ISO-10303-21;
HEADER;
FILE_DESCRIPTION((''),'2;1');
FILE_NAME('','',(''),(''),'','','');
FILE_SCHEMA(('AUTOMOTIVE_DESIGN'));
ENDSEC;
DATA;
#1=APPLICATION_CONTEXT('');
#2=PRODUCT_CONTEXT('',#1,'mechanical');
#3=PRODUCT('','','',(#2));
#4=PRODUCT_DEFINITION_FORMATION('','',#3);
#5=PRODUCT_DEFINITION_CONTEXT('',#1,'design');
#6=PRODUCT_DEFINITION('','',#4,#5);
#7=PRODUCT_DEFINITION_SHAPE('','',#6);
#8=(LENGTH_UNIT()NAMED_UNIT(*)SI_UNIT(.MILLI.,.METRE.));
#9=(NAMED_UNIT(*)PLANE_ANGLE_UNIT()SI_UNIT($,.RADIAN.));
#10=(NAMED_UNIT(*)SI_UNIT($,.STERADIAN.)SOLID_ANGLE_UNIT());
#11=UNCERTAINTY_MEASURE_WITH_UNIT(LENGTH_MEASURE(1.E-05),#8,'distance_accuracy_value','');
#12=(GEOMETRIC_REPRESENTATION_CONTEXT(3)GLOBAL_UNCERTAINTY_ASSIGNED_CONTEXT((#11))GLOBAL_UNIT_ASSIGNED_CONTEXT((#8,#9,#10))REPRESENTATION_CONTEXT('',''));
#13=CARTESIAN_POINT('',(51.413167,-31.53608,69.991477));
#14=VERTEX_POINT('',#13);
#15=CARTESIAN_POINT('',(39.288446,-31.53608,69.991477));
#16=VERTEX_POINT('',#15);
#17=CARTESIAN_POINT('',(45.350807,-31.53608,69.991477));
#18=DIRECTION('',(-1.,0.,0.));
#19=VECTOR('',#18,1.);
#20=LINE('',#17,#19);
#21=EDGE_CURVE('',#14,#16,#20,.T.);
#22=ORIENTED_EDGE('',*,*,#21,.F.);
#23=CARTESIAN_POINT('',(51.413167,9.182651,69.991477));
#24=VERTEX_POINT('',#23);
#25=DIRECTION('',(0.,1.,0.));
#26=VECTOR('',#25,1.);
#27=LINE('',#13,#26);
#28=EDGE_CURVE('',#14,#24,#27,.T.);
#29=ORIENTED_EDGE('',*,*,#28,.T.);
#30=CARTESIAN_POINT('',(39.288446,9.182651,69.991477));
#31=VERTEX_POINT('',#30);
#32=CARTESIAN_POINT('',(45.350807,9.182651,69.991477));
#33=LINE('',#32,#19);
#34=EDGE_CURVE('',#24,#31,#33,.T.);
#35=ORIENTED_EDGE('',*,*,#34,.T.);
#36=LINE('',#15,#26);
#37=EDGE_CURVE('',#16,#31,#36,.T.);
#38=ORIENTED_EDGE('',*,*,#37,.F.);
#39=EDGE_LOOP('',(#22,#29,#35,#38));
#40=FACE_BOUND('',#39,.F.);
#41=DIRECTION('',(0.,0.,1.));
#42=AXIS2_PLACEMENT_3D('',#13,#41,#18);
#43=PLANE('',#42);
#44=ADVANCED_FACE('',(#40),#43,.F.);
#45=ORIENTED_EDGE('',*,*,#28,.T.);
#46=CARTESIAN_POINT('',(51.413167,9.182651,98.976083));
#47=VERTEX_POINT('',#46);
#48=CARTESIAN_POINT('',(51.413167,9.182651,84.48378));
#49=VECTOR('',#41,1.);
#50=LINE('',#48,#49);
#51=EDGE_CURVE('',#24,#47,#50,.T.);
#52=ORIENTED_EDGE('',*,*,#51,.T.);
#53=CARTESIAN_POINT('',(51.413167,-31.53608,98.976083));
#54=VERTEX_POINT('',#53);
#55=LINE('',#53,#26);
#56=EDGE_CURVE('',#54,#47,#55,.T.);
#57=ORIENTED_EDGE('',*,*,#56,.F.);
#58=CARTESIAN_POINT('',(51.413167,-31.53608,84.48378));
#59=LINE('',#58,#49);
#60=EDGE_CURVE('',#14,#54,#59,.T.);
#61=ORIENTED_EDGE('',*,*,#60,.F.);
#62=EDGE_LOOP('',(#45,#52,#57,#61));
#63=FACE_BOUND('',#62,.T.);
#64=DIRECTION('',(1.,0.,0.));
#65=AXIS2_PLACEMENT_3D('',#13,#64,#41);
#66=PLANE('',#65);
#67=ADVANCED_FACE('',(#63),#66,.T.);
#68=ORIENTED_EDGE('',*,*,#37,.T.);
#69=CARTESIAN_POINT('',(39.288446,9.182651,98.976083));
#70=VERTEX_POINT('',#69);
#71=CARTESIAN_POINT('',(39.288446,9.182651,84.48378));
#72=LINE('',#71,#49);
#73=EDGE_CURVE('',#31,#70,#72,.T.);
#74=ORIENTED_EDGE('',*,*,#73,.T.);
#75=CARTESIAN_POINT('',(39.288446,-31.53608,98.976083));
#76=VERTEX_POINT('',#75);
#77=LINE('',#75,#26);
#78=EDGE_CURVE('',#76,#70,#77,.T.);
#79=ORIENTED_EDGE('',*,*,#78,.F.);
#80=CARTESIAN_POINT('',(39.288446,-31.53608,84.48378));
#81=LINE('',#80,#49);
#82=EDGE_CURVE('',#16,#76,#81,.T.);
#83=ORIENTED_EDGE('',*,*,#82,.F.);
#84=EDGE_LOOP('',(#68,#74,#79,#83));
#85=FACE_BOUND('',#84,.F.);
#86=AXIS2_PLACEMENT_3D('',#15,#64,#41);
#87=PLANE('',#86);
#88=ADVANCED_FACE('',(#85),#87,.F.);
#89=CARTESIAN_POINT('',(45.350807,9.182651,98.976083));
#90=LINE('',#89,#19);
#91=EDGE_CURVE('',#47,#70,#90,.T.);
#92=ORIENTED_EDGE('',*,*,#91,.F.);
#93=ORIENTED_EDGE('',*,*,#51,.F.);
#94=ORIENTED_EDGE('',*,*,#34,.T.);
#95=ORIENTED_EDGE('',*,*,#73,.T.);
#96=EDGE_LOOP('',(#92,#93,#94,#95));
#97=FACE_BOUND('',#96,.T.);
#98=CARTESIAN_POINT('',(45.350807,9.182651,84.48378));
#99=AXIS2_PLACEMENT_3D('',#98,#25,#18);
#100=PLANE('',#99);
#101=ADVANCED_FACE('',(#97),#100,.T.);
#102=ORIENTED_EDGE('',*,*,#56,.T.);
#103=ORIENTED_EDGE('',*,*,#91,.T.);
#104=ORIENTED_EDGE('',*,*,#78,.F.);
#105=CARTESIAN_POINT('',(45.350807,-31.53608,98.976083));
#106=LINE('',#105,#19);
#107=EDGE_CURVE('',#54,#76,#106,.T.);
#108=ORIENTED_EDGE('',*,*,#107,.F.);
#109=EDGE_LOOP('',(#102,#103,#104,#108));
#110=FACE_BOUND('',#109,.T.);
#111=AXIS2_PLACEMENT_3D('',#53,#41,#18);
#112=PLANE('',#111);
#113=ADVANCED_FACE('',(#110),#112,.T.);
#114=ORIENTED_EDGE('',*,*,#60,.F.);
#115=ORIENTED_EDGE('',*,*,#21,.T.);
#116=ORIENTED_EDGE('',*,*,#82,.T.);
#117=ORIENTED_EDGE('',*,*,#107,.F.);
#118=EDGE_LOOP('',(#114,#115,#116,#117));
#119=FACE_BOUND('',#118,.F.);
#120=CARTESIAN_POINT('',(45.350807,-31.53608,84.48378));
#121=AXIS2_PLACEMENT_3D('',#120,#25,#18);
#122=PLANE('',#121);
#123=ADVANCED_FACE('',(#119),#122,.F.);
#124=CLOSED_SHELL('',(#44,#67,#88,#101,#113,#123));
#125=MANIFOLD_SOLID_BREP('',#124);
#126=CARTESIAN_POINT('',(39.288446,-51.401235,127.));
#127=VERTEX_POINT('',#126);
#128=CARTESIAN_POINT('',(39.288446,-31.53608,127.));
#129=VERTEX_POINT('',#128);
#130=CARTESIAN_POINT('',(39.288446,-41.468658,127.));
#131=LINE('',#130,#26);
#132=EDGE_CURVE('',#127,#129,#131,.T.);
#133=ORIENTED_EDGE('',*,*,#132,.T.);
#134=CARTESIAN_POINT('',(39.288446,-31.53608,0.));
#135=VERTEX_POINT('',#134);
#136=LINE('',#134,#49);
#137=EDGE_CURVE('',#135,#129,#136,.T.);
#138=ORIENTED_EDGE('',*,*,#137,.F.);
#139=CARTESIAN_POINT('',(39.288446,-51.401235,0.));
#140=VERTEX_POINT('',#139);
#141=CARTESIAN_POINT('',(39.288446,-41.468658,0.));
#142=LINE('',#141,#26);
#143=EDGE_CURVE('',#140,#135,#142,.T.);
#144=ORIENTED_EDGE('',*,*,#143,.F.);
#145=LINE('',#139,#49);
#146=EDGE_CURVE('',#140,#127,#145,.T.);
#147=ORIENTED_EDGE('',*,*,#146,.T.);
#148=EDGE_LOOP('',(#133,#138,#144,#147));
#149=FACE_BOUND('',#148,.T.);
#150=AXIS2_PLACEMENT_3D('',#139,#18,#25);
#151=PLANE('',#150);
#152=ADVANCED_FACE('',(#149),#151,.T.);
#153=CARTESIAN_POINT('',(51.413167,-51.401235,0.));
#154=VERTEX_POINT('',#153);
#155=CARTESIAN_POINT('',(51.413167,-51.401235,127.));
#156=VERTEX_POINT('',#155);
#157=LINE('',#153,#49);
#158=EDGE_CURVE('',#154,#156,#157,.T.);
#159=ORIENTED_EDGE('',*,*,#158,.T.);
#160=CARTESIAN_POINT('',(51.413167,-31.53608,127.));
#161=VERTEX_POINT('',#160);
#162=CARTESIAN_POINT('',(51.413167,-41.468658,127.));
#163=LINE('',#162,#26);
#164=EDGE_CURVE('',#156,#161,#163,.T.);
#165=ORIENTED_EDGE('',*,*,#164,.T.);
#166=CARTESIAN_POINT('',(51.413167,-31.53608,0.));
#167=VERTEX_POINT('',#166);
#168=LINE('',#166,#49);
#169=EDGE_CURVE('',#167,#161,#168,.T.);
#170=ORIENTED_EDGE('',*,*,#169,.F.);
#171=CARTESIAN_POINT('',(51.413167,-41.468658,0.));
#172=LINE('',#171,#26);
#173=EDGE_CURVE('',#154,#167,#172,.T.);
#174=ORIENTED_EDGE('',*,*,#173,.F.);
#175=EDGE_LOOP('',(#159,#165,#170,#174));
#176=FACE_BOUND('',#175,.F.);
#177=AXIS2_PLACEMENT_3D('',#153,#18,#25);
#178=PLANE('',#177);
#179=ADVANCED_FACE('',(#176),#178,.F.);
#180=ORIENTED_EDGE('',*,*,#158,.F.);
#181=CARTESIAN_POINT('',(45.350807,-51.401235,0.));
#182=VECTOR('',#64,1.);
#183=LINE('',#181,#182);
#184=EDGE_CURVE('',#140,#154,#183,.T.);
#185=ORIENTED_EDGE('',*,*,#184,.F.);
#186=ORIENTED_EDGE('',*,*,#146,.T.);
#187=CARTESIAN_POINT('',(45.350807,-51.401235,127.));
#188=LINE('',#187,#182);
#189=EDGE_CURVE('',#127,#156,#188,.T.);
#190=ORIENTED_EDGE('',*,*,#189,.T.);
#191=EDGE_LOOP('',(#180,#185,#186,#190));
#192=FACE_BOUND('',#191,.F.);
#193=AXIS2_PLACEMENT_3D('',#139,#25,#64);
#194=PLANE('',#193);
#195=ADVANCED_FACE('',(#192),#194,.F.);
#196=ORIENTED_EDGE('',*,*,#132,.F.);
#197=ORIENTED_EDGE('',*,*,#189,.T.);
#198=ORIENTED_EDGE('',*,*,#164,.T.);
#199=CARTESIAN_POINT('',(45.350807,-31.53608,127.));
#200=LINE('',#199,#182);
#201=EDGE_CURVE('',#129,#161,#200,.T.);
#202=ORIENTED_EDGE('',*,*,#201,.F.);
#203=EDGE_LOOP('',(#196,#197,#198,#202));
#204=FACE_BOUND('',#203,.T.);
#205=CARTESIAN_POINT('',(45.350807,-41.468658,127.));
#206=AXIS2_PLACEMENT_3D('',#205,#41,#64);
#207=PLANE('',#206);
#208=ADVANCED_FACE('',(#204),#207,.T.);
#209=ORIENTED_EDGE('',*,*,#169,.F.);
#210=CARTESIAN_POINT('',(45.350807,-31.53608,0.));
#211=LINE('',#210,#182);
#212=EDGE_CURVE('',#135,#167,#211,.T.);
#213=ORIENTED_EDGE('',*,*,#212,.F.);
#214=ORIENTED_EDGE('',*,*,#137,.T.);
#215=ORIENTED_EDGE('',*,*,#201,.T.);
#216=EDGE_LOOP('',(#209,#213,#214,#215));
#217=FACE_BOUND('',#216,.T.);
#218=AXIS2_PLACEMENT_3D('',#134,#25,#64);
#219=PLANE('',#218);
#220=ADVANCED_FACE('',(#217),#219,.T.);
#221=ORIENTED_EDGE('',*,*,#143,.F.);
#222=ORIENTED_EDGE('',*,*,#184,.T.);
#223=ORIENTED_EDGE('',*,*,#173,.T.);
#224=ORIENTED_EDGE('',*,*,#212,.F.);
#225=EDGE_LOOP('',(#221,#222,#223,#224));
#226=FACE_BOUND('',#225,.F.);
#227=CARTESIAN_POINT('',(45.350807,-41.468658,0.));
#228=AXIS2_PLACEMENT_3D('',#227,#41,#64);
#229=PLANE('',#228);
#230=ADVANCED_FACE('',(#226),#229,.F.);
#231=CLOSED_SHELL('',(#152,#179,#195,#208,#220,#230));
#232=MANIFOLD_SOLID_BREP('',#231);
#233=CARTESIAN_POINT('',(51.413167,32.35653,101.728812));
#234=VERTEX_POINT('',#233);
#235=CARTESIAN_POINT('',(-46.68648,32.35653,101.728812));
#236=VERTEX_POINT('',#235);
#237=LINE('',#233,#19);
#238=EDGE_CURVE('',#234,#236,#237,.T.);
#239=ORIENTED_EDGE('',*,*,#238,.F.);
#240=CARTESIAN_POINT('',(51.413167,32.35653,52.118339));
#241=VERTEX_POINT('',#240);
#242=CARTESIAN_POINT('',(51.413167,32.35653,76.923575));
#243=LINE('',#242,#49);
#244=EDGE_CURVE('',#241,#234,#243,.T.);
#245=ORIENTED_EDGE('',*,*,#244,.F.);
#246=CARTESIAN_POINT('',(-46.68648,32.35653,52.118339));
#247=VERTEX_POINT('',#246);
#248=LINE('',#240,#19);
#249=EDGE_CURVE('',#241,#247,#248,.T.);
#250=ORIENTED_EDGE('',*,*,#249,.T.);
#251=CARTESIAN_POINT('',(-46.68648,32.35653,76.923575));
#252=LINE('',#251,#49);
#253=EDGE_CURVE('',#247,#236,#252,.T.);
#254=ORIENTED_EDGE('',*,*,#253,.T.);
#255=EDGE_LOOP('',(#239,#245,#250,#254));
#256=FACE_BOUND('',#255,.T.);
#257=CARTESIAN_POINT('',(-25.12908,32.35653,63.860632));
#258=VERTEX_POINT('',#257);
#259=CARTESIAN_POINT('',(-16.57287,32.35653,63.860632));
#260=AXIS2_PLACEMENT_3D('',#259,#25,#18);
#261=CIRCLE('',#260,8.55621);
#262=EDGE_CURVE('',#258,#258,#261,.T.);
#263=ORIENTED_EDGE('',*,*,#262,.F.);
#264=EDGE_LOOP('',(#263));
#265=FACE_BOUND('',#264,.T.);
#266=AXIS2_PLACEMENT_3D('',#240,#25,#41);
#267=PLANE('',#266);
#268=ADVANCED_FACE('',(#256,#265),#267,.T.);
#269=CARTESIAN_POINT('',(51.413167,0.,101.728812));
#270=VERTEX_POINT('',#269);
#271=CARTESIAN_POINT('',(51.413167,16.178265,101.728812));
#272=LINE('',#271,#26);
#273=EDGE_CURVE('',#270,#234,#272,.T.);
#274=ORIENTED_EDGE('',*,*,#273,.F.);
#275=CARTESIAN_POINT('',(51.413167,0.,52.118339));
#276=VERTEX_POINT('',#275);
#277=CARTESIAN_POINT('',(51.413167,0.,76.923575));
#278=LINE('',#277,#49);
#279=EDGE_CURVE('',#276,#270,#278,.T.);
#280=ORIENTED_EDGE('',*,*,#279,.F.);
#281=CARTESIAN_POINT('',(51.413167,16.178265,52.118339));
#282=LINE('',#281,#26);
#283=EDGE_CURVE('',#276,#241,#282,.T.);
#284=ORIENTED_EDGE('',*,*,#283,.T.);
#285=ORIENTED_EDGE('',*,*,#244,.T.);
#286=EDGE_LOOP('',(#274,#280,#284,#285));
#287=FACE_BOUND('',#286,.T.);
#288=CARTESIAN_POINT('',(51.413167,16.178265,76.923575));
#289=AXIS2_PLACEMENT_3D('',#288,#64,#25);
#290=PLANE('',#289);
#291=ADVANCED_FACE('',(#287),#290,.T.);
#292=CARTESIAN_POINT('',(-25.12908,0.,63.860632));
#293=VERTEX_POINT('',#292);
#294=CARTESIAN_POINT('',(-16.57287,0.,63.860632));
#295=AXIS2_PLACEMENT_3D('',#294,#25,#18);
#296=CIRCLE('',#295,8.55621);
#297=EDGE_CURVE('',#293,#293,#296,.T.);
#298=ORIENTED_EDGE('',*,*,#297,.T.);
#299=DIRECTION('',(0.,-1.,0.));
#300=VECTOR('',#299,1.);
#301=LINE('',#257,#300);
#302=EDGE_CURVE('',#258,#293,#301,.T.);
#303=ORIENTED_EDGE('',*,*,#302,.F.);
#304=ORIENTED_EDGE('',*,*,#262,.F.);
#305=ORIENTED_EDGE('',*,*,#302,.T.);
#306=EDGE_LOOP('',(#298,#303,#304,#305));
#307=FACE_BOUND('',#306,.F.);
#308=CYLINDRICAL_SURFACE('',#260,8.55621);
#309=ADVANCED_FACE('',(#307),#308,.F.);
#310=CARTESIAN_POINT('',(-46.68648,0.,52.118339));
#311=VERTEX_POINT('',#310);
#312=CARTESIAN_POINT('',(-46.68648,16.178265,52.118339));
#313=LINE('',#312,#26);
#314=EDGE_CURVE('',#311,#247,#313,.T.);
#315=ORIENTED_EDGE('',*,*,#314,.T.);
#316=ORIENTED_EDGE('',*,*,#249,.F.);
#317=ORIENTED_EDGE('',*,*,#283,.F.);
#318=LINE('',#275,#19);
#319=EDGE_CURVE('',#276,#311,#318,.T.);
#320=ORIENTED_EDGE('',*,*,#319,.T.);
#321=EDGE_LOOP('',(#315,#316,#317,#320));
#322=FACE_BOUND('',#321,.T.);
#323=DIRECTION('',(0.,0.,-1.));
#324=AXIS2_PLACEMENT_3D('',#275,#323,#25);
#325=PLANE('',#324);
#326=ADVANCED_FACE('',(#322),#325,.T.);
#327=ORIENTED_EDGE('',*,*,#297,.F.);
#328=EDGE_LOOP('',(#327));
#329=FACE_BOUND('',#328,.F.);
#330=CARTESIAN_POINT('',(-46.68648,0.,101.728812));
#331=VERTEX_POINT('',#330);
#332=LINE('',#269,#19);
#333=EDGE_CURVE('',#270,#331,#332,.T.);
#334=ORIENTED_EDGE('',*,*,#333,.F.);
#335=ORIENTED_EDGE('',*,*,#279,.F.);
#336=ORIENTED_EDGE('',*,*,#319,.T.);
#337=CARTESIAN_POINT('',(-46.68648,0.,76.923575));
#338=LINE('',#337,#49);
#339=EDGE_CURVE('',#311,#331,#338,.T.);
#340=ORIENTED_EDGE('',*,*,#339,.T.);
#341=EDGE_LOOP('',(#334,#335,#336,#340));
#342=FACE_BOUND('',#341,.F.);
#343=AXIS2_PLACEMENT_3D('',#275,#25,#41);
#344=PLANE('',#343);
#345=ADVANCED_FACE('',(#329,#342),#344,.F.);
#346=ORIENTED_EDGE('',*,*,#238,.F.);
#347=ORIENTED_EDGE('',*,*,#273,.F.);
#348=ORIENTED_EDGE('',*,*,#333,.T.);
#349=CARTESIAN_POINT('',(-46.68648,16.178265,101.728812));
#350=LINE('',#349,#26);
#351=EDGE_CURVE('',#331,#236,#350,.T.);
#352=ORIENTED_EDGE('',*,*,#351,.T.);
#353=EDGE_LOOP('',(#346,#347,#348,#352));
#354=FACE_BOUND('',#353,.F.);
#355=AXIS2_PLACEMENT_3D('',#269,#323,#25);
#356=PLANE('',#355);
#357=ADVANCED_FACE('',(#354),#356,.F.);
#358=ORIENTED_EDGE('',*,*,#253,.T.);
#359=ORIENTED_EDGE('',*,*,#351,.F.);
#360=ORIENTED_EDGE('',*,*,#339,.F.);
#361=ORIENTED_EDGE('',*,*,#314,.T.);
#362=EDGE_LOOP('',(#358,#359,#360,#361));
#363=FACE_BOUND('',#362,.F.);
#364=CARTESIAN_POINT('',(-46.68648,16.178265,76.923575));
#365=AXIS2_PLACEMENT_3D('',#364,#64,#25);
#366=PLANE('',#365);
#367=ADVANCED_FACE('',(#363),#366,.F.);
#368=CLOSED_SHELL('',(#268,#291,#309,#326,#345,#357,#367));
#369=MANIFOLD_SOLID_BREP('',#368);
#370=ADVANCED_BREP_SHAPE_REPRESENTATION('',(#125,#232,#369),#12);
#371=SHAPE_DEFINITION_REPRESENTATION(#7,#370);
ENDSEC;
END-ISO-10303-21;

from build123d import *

# Parameters (mm, degrees)
F0_W     = 12.1247209609
F0_H     = 19.86515522
F2_DEPTH = 127
F3_W     = 32.3565304279
F3_H     = 49.6104732156
F4_DEPTH = 98.0996470898
F6_W     = 12.1247209609
F6_H     = 28.984606266
F7_DEPTH = 40.7187305391
F8_R     = 8.5562099795
F9_DEPTH = 81.7973520607


# Not quite as in the source:
# - a feature of the source that left no trace in its solid (it failed there, or was rolled back) is left out


with BuildPart() as f2:
    # F0 (on Top) → F2 (new body)
    with BuildSketch(Plane.XY):
        with Locations((45.3508067876, -41.4686575532)):
            Rectangle(F0_W, F0_H)
    extrude(amount=F2_DEPTH)


with BuildPart() as f4:
    # F3 (on face) → F4 (new body)
    with BuildSketch(Plane.YZ.offset(51.413167268)):
        with Locations((16.178265214, 76.9235752523)):
            Rectangle(F3_W, F3_H)
    extrude(amount=-F4_DEPTH)

    # F8 (on face) → F9 (cut)
    with BuildSketch(Plane(origin=(0, 32.3565304279, 0), x_dir=(-1, 0, 0), z_dir=(0, 1, 0))):
        with Locations((16.5728703141, 63.8606324792)):
            Circle(F8_R)
    extrude(amount=-F9_DEPTH, mode=Mode.SUBTRACT)


with BuildPart() as f7:
    # F6 (on face) → F7 (new body)
    with BuildSketch(Plane(origin=(0, -31.5360799432, 0), x_dir=(-1, 0, 0), z_dir=(0, 1, 0))):
        with Locations((-45.3508067876, 84.4837799668)):
            Rectangle(F6_W, F6_H)
    extrude(amount=F7_DEPTH)


solid = Compound([f2.part, f4.part, f7.part])
